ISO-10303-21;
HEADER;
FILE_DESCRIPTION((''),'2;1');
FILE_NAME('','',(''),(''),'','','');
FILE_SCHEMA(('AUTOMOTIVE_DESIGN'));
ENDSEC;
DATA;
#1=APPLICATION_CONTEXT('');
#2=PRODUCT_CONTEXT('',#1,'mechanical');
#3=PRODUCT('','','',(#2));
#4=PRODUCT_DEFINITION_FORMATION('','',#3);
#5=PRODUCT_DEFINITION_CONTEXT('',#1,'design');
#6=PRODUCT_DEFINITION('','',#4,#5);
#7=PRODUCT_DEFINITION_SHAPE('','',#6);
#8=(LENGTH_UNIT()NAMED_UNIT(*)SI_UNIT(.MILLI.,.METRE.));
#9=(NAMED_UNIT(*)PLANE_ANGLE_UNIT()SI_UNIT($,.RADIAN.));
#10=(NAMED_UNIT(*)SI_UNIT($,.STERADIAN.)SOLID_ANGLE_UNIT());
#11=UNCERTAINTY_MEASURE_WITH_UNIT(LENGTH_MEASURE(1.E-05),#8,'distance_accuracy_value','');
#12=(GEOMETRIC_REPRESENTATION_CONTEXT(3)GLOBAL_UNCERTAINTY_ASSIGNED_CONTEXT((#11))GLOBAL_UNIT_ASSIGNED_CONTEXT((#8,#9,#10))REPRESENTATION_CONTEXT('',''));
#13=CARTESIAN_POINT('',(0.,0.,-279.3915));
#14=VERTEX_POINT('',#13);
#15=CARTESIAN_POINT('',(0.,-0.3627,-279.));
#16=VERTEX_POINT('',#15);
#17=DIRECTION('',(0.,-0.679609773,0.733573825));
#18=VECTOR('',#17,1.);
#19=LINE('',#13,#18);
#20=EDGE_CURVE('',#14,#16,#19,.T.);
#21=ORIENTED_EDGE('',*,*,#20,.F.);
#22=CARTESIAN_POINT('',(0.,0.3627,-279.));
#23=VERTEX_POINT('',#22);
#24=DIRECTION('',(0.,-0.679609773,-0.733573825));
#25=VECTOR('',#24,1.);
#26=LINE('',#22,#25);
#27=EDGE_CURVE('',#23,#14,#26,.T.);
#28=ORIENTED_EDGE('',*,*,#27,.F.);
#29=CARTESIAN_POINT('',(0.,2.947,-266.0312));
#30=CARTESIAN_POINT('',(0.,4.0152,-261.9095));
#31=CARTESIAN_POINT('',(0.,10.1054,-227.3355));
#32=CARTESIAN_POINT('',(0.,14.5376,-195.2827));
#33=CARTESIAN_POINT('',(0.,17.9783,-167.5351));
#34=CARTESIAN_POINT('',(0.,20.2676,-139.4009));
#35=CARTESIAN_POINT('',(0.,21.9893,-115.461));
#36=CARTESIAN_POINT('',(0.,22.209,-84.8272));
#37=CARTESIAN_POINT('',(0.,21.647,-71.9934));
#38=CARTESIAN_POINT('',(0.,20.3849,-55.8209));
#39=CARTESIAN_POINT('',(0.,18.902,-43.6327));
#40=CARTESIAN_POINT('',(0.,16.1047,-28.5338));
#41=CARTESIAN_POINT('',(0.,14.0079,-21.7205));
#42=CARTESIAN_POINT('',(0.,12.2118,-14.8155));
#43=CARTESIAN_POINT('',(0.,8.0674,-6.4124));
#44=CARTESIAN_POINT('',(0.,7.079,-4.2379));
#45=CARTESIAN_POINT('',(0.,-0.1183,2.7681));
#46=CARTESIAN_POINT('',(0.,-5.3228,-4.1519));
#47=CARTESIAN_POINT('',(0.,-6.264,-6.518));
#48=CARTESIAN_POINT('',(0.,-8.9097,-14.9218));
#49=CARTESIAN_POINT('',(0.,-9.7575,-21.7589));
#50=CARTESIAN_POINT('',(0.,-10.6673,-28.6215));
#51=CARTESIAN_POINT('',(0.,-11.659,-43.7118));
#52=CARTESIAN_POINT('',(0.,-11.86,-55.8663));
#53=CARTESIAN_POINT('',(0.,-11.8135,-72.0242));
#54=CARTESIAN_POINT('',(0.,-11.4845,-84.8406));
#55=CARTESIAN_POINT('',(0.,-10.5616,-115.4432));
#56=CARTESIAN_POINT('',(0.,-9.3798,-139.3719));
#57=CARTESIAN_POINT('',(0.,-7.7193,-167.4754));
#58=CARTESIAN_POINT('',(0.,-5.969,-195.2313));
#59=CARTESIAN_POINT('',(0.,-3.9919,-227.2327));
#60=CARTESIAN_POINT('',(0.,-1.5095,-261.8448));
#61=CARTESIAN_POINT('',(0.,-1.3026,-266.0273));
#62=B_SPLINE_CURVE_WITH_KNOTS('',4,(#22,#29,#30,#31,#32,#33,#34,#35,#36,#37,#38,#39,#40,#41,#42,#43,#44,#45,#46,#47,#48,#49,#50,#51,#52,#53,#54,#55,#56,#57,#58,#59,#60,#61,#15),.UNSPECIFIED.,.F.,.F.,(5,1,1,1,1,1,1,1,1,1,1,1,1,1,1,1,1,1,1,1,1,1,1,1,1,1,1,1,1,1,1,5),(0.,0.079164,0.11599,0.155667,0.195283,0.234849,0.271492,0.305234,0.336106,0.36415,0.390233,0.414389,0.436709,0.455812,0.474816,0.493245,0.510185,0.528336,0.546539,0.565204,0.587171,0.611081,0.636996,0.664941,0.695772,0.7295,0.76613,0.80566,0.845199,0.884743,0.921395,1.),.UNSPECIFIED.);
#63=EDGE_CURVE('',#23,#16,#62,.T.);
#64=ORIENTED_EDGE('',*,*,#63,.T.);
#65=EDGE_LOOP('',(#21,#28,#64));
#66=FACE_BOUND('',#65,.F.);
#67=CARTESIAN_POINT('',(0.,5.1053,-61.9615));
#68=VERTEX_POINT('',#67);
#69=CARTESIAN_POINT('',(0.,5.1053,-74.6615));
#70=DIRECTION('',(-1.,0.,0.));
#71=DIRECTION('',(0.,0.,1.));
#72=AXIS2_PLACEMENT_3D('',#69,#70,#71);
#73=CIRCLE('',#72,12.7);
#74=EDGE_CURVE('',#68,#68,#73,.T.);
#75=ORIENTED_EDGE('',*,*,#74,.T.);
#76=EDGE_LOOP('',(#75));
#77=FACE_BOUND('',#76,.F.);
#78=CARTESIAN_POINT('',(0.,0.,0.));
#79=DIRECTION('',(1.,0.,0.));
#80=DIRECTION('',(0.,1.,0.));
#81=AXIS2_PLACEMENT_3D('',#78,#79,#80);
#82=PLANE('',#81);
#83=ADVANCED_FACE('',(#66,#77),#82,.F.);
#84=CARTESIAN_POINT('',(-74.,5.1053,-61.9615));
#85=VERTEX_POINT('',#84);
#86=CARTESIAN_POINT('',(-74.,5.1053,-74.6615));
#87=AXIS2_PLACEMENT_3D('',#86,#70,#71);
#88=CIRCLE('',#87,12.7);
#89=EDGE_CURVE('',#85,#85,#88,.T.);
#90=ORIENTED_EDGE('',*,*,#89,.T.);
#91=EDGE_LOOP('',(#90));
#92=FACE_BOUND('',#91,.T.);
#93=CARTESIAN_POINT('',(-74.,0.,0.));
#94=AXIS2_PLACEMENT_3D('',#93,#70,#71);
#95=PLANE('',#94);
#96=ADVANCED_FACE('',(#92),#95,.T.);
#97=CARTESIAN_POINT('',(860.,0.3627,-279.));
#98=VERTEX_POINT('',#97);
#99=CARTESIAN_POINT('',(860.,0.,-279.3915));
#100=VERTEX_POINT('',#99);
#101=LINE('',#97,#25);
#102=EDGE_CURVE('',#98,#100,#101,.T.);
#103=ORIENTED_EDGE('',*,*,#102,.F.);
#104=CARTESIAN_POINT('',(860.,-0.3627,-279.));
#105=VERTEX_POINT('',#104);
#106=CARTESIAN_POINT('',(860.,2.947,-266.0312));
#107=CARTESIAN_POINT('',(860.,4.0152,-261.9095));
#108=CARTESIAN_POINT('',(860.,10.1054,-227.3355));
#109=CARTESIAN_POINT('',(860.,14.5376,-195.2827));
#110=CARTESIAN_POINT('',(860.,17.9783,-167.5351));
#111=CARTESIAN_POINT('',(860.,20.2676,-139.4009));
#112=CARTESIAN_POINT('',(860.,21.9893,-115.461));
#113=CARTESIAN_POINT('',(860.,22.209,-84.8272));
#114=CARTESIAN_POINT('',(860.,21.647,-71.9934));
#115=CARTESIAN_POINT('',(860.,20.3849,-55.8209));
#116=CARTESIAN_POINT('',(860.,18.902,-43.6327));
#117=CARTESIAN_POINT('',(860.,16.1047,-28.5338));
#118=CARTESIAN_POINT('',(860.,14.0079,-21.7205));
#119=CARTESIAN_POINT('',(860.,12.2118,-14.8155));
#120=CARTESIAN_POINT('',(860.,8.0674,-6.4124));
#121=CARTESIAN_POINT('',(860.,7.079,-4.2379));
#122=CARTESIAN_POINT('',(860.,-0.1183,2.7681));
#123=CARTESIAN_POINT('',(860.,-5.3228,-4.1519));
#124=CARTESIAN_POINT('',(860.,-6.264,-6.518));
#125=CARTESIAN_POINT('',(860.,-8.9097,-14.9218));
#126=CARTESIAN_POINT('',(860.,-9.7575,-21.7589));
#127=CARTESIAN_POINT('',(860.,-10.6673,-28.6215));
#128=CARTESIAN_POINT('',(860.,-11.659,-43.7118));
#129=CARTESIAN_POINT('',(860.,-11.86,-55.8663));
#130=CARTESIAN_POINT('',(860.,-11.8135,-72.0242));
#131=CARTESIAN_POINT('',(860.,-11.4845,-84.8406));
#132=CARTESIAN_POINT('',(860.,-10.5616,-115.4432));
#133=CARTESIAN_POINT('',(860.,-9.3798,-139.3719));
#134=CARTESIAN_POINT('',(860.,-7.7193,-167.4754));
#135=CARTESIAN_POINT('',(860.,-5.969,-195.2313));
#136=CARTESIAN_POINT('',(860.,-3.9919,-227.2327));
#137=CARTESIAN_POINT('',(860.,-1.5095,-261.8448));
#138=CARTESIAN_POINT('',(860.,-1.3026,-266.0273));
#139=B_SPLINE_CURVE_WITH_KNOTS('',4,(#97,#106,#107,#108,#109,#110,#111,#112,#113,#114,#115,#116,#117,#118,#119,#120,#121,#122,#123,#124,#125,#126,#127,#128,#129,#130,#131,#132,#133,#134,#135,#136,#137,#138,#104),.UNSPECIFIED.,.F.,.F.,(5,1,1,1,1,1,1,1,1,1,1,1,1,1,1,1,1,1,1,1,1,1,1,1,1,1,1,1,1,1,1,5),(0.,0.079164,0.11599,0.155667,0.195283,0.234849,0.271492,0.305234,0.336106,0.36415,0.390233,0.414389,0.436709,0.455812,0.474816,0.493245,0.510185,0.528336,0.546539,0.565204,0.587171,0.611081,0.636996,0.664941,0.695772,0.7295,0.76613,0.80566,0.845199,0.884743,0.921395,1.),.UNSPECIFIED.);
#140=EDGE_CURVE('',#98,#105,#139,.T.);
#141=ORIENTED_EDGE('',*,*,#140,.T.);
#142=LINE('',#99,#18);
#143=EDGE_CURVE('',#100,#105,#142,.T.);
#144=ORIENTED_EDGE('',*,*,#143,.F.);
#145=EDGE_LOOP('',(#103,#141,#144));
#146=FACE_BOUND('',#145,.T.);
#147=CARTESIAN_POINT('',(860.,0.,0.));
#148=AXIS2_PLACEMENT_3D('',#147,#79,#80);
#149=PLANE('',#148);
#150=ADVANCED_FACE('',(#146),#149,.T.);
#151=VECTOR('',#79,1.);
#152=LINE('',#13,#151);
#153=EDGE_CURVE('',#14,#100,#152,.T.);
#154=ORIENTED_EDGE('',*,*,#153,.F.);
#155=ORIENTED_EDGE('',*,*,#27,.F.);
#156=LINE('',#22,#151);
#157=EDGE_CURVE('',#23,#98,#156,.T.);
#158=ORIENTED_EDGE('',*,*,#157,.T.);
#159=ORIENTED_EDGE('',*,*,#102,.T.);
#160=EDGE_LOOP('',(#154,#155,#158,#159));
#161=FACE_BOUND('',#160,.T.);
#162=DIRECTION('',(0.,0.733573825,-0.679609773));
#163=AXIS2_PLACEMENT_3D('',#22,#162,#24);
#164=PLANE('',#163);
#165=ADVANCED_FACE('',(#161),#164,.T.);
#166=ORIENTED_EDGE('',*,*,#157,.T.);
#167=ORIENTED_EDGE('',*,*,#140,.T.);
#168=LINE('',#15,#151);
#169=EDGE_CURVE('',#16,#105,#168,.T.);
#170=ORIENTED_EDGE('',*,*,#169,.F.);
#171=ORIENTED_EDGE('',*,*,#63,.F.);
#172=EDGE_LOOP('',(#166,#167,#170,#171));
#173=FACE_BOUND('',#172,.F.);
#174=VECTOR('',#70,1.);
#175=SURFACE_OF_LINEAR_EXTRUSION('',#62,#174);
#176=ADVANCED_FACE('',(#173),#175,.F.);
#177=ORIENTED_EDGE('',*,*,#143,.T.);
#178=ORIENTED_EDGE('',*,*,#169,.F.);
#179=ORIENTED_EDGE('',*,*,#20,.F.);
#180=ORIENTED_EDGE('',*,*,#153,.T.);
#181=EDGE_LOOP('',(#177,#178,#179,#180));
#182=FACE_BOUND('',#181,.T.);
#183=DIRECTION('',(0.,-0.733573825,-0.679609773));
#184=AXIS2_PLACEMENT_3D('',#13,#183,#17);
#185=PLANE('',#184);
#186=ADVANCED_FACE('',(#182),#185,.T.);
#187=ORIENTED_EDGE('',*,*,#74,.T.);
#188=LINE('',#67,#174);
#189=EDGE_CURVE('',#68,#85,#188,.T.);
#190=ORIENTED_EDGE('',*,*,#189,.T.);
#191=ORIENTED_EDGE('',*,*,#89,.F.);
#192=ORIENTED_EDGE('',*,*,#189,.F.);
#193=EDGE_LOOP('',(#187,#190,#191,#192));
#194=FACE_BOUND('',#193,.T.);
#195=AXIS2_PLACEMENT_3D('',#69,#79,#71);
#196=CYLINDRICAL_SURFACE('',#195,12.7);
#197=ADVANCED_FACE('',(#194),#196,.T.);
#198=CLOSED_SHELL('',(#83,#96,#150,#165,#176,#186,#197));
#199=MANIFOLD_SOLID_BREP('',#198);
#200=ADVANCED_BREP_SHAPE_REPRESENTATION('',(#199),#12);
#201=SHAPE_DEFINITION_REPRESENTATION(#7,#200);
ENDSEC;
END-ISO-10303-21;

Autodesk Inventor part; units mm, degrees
ref_plane "YZ Plane" through (0, 0, 0) normal (1, 0, 0) x (0, 1, 0)
ref_plane "XZ Plane" through (0, 0, 0) normal (0, 1, 0) x (-1, 0, 0)
sketch "Sketch1" plane through (0, 0, 0) normal (1, 0, 0) x (0, 1, 0)
  spline S0 degree 4 poles (0.3627, -279) (2.947, -266.0312) (4.0152, -261.9095) (10.1054, -227.3355) (14.5376, -195.2827) (17.9783, -167.5351) (20.2676, -139.4009) (21.9893, -115.461) (22.209, -84.8272) (21.647, -71.9934) (20.3849, -55.8209) (18.902, -43.6327) (16.1047, -28.5338) (14.0079, -21.7205) (12.2118, -14.8155) (8.0674, -6.4124) (7.079, -4.2379) (-0.1183, 2.7681) (-5.3228, -4.1519) (-6.264, -6.518) (-8.9097, -14.9218) (-9.7575, -21.7589) (-10.6673, -28.6215) (-11.659, -43.7118) (-11.86, -55.8663) (-11.8135, -72.0242) (-11.4845, -84.8406) (-10.5616, -115.4432) (-9.3798, -139.3719) (-7.7193, -167.4754) (-5.969, -195.2313) (-3.9919, -227.2327) (-1.5095, -261.8448) (-1.3026, -266.0273) (-0.3627, -279) knots 0 0 0 0 0 0.079164 0.11599 0.155667 0.195283 0.234849 0.271492 0.305234 0.336106 0.36415 0.390233 0.414389 0.436709 0.455812 0.474816 0.493245 0.510185 0.528336 0.546539 0.565204 0.587171 0.611081 0.636996 0.664941 0.695772 0.7295 0.76613 0.80566 0.845199 0.884743 0.921395 1 1 1 1 1
  line L0 (0.3627, -279) -> (0, -279.3915)
  line L1 (0, -279.3915) -> (-0.3627, -279)
  point P0 (0, 0)
  point P1 (3.1806, -265.05)
  point P2 (5.8032, -251.1)
  point P3 (10.4625, -223.2)
  point P4 (14.4522, -195.3)
  point P5 (17.7444, -167.4)
  point P6 (20.1996, -139.5)
  point P7 (21.762, -111.6)
  point P8 (21.9852, -83.7)
  point P9 (21.3993, -69.75)
  point P10 (20.2554, -55.8)
  point P11 (18.4419, -41.85)
  point P12 (15.7077, -27.9)
  point P13 (13.8384, -20.925)
  point P14 (11.5227, -13.95)
  point P15 (8.3421, -6.975)
  point P16 (5.9985, -3.4875)
  point P17 (0, 0)
  point P18 (-4.6035, -3.4875)
  point P19 (-6.3333, -6.975)
  point P20 (-8.3979, -13.95)
  point P21 (-9.6534, -20.925)
  point P22 (-10.4625, -27.9)
  point P23 (-11.439, -41.85)
  point P24 (-11.8017, -55.8)
  point P25 (-11.7738, -69.75)
  point P26 (-11.4948, -83.7)
  point P27 (-10.602, -111.6)
  point P28 (-9.3186, -139.5)
  point P29 (-7.7004, -167.4)
  point P30 (-5.9706, -195.3)
  point P31 (-4.185, -223.2)
  point P32 (-2.2878, -251.1)
  point P33 (-1.3392, -265.05)
  point P34 (8.3421, -6.975)
extrude "Extrusion1" add sketch "Sketch1" along normal blind 860
sketch "Sketch2" plane through (860, 0, 0) normal (1, 0, 0) x (0, 0, -1)
  line L0 (1.5803, -0.3627) -> (279, -0.3627)
  point P0 (0, 0)
ref_plane "Work Plane1" through (860, -0.3627, -1.5803) normal (0.9993908, 0.0348995, 0) x (0, 0, -1)
ref_plane "Work Plane2" through (430, 0, 0) normal (1, 0, 0) x (0, 0, -1)
mirror "Mirror1" about plane through (430, 0, 0) normal (1, 0, 0)
sketch "Sketch3" plane through (0, 0, 0) normal (-1, 0, 0) x (0, 0, 1)
  line L0 (-74.6615, 5.1053) -> (0, 0) construction
  circle A0 centre (-74.6615, 5.1053) radius 12.7
  dimension "d3" = 25.4
extrude "Extrusion2" add sketch "Sketch3" along normal blind 74
ref_plane "Work Plane3" through (0, -0.3627, -1.5803) normal (0.9993908, -0.0348995, 0) x (0, 0, -1)
properties part number "Generic Wing 1"
